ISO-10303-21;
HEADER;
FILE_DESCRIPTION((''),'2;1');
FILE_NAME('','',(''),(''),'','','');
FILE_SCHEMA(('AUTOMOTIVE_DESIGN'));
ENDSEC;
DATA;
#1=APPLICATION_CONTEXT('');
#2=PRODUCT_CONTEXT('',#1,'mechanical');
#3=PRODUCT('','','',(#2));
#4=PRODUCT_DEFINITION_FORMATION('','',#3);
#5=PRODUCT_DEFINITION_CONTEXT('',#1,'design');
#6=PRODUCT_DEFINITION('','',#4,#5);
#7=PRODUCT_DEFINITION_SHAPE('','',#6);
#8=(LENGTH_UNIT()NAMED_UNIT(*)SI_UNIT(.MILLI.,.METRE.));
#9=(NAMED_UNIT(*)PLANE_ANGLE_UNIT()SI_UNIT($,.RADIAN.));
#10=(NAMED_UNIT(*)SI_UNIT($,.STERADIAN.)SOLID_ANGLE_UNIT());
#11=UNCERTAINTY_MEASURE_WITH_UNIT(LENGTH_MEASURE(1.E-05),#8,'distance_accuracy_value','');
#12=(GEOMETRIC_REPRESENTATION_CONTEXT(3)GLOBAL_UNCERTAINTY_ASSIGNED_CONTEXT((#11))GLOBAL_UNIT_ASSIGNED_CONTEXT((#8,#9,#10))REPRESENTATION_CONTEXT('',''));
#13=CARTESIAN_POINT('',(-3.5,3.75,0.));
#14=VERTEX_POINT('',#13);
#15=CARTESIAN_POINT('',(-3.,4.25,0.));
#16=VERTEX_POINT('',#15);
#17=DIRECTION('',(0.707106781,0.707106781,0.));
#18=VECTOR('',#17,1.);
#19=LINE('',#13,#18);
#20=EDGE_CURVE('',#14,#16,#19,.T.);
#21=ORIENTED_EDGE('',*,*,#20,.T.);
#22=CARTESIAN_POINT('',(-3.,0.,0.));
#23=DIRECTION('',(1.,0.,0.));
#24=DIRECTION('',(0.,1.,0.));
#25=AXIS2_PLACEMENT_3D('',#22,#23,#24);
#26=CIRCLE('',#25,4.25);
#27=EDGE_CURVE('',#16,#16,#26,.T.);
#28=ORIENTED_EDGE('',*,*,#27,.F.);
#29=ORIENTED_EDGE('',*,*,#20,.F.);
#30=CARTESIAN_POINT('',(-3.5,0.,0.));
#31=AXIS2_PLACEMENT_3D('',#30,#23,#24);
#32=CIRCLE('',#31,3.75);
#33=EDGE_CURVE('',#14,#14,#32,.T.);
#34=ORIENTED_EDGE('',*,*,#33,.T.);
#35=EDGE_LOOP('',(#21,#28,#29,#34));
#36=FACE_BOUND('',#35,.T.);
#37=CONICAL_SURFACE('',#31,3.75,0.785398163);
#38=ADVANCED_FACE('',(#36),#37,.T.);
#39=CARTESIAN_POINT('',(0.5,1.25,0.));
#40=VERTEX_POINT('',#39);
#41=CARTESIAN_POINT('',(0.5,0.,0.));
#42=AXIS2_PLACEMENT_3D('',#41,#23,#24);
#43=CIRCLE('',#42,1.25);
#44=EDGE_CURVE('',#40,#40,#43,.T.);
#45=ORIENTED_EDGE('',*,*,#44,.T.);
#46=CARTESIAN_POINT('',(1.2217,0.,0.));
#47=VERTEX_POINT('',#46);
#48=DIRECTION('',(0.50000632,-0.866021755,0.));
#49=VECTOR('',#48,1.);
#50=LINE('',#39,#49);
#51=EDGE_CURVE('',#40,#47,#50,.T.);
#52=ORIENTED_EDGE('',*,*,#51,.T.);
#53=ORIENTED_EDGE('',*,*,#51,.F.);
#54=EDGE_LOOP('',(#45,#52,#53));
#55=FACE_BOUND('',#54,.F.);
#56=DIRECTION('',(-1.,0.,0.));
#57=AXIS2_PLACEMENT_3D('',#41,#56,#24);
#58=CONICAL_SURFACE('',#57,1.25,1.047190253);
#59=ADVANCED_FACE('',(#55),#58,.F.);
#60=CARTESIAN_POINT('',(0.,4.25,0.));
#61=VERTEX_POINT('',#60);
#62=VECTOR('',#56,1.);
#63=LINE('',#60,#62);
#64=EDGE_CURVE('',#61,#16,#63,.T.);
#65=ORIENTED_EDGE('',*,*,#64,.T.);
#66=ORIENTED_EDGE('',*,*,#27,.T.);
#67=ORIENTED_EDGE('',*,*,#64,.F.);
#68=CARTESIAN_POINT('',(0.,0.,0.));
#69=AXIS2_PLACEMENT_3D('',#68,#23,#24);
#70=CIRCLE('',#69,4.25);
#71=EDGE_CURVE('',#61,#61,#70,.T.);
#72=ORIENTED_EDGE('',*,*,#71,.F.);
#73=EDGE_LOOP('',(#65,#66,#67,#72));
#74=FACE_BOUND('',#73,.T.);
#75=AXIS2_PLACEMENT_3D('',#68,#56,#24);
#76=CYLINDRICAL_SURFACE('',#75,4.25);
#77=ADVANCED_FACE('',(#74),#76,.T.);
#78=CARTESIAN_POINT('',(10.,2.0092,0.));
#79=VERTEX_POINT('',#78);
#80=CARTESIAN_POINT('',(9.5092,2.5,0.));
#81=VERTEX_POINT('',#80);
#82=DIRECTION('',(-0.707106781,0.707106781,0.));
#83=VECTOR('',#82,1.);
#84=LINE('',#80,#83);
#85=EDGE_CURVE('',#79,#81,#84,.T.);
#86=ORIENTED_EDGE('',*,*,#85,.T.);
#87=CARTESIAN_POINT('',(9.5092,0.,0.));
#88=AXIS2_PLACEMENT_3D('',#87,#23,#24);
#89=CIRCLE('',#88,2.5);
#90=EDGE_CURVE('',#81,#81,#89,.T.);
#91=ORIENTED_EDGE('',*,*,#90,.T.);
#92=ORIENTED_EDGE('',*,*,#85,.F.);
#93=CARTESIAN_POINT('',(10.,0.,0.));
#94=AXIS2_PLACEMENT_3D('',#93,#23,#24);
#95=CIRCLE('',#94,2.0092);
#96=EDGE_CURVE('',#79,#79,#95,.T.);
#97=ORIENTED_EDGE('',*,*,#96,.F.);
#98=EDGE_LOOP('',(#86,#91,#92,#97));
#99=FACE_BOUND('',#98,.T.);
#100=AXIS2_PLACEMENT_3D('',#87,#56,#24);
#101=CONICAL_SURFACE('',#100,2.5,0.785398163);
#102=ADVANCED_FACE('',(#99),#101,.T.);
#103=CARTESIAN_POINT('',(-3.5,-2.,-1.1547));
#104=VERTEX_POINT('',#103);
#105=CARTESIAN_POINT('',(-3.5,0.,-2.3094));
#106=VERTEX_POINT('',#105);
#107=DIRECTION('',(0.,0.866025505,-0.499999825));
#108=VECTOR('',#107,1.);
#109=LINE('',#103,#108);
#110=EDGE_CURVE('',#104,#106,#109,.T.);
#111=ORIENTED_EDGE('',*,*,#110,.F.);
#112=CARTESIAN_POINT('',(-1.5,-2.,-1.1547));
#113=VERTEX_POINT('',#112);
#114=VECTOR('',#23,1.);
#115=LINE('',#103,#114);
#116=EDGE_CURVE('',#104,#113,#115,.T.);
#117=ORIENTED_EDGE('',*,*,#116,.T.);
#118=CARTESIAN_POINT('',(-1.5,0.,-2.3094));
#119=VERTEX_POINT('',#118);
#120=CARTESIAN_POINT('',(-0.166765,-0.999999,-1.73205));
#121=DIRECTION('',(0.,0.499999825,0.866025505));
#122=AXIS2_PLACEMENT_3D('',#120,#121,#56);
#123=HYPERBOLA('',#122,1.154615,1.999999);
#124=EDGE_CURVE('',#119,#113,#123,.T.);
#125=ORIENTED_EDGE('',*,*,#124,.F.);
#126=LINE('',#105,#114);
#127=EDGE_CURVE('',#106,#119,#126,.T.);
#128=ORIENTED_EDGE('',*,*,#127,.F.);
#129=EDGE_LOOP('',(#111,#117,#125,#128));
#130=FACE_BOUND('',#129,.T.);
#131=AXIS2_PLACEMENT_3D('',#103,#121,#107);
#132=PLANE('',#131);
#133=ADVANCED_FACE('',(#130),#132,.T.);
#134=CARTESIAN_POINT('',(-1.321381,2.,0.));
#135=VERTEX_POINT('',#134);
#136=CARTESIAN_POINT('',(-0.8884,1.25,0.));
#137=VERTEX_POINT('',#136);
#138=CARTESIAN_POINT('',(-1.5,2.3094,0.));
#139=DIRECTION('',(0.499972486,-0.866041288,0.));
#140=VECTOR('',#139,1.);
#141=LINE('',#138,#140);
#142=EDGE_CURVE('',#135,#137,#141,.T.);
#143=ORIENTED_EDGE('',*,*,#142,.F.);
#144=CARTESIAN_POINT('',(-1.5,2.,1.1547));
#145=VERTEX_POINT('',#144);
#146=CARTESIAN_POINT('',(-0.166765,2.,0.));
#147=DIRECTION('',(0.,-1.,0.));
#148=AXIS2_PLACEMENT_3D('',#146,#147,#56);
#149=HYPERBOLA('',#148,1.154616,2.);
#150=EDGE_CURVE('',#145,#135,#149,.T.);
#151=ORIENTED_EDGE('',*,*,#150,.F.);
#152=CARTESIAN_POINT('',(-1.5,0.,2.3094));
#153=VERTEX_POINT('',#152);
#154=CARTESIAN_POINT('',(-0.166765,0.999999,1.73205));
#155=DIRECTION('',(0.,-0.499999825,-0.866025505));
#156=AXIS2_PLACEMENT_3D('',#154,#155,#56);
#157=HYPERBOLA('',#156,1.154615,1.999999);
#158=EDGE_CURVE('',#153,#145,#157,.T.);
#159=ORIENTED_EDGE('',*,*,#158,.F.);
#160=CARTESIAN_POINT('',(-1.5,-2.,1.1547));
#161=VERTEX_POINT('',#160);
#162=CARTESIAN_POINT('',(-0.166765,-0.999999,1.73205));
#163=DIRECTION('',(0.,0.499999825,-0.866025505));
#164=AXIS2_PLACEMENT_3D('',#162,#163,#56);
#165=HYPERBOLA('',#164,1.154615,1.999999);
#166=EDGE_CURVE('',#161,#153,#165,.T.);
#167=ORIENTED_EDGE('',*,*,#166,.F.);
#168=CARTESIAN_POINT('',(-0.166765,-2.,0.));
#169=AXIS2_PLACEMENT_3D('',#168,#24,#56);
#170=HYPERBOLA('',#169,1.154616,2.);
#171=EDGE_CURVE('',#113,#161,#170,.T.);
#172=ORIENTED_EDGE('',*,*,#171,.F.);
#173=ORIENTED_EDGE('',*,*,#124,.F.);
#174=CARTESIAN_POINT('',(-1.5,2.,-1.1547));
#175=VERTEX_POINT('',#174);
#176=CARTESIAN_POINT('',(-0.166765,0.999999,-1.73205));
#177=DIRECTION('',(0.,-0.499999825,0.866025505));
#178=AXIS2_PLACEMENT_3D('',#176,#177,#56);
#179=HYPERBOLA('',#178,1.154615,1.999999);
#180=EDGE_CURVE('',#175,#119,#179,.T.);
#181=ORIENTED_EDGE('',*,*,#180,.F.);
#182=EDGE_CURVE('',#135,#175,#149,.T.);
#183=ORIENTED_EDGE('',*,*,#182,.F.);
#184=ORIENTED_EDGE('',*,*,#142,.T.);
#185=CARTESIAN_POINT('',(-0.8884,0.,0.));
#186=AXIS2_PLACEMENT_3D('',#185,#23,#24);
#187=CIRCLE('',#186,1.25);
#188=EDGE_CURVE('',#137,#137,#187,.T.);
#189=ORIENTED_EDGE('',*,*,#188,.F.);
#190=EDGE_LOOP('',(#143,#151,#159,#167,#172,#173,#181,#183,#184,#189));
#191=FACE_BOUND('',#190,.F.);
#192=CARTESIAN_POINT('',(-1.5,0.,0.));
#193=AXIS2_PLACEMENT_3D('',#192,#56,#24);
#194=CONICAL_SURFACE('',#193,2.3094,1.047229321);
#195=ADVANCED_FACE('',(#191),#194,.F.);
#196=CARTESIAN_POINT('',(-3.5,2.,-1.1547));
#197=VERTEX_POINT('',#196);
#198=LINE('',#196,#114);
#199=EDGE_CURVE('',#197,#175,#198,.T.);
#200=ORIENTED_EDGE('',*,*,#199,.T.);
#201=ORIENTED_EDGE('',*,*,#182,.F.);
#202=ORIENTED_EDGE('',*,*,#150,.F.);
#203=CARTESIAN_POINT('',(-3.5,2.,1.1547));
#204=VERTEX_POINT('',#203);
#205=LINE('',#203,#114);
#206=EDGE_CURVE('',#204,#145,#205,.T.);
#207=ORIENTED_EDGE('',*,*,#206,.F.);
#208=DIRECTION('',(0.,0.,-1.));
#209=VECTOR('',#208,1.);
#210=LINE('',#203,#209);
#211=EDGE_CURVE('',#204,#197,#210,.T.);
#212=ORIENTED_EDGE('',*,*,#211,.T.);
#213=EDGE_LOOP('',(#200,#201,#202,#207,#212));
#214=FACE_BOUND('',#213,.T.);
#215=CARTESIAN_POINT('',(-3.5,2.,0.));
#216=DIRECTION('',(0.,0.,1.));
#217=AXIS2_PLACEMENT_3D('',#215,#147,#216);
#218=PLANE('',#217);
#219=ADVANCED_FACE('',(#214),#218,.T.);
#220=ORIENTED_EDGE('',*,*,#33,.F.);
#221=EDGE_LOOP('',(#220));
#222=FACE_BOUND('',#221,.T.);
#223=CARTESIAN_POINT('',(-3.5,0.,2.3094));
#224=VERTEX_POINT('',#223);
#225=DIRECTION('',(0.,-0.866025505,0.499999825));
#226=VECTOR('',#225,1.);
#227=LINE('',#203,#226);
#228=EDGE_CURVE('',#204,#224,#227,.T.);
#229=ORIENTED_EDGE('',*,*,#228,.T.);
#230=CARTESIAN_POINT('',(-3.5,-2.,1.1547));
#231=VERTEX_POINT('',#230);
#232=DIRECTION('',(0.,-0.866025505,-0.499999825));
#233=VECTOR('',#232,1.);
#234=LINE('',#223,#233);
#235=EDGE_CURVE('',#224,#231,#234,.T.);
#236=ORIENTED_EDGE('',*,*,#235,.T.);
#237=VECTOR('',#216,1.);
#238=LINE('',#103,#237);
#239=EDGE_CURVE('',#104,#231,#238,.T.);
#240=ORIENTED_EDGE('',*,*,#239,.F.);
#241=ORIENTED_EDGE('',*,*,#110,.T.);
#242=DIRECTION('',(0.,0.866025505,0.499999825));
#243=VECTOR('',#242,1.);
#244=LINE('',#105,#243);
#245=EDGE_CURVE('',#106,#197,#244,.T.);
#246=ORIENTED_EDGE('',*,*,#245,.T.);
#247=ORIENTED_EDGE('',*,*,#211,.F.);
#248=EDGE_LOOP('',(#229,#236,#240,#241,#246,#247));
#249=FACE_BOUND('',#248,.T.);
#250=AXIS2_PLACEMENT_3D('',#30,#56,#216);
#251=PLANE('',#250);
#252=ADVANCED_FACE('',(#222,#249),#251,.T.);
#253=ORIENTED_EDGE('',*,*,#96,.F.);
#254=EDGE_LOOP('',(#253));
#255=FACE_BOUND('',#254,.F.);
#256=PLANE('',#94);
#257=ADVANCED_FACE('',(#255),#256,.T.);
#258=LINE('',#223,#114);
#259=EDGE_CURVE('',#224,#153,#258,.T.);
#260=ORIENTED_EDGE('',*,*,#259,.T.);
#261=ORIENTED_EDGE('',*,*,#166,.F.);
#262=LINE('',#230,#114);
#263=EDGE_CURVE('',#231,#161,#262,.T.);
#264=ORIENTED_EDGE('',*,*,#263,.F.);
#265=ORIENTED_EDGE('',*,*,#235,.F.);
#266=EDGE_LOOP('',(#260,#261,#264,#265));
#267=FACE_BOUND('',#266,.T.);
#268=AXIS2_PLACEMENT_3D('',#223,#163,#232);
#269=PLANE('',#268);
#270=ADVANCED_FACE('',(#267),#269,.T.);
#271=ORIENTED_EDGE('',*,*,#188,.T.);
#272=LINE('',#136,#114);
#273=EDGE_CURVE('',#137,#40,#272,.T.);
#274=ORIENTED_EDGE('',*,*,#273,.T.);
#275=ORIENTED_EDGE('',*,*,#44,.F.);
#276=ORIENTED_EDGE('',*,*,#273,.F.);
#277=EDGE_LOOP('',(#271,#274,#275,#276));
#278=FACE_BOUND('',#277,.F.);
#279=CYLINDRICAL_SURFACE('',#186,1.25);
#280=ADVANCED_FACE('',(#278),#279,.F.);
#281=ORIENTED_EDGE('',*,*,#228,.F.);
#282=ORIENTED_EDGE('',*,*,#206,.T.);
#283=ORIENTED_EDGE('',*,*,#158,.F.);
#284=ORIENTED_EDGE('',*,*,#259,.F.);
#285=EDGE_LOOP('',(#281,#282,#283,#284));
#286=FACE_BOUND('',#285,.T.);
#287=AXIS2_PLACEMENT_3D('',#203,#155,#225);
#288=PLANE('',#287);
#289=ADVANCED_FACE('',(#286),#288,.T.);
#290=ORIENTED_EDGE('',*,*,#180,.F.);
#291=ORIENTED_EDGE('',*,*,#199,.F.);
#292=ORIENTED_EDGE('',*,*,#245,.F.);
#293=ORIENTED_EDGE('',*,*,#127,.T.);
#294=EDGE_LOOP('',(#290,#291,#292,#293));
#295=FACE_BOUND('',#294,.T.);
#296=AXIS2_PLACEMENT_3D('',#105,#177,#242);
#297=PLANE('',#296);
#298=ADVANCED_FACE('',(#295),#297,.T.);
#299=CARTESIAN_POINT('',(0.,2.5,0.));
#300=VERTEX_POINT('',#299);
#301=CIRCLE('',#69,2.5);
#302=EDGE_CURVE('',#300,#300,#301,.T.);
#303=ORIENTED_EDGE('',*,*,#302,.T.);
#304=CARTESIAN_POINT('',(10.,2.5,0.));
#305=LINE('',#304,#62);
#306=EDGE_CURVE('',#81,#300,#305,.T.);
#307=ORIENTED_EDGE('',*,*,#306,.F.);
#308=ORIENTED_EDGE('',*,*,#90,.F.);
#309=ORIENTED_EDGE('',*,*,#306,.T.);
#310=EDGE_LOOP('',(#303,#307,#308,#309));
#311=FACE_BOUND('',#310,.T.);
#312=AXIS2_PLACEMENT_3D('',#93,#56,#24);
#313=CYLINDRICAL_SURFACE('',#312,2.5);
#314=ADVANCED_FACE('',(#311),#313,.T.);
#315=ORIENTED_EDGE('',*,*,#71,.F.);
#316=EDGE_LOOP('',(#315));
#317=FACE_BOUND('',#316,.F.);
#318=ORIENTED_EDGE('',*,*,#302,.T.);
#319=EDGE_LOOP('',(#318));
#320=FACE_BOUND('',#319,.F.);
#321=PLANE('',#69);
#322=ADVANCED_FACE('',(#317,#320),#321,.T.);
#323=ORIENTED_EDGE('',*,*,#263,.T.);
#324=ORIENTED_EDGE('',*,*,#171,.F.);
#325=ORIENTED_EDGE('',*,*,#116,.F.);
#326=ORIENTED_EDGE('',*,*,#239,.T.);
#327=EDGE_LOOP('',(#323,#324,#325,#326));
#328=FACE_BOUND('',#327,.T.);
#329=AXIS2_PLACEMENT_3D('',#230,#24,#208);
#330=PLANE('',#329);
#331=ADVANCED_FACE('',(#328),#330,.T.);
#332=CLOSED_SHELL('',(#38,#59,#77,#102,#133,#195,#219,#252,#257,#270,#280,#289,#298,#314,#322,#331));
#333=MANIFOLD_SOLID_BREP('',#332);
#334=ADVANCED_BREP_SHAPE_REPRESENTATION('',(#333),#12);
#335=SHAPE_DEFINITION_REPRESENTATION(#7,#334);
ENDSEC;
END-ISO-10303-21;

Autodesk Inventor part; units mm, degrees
ref_plane "YZ Plane" through (0, 0, 0) normal (1, 0, 0) x (0, 1, 0)
ref_plane "XZ Plane" through (0, 0, 0) normal (0, 1, 0) x (-1, 0, 0)
sketch "Skizze1" plane through (0, 0, 0) normal (0, 0, 1) x (1, 0, 0)
  line L0 (1.2217, 0) -> (10, 0)
  line L1 (10, 0) -> (10, 2.5)
  line L2 (10, 2.5) -> (0, 2.5)
  line L3 (0, 2.5) -> (0, 4.25)
  line L4 (0, 4.25) -> (-3.5, 4.25)
  line L5 (-3.5, 4.25) -> (-3.5, 2.3094)
  line L6 (-3.5, 2.3094) -> (-1.5, 2.3094)
  line L7 (-1.5, 2.3094) -> (-0.8884, 1.25)
  line L8 (-6.2, 0) -> (12.7, 0) projected
  line L9 (0, -0.85) -> (0, 5.1) projected
  line L10 (-0.8884, 1.25) -> (0.5, 1.25)
  line L11 (0.5, 1.25) -> (1.2217, 0)
  line L12 (-3.5, 2.3094) -> (-3.5, 0) construction
  line L13 (-3.5, 3.75) -> (-3, 4.25)
  dimension "d0" = 3.5
  dimension "d1" = 2
  dimension "d2" = 60
  dimension "d3" = 5
  dimension "d4" = 4.6188
  dimension "d5" = 8.5
  dimension "d15" = 4
  dimension "d16" = 2.5
  dimension "d17" = 10
  dimension "d32" = 45
  dimension "d33" = 0.5
revolve "Körper" add sketch "Skizze1" angle 360 about axis through (1.2217, 0, 0) along (1, 0, 0) contours L11 L10 L9 L2 L1 L0 | L10 L7 L6 L5 L13 L4 L3 L9 | L13 L5 L4
revolve "Fase2" cut sketch "Skizze1" angle 360 about axis through (-10, 0, 0) along (1, 0, 0) contours L13 L5 L4
sketch "Skizze2" plane through (-3.5, 0, 0) normal (-1, 0, 0) x (0, 0, 1)
  circle A0 centre (0, 0) radius 2.3094 projected
  line L0 (0, -5.95) -> (0, 5.95) projected
  line L1 (-5.95, 0) -> (5.95, 0) projected
  line L2 (2.3094, 0) -> (1.1547, -2)
  line L3 (1.1547, -2) -> (-1.1547, -2)
  line L4 (-1.1547, -2) -> (-2.3094, 0)
  line L5 (-2.3094, 0) -> (-1.1547, 2)
  line L6 (-1.1547, 2) -> (1.1547, 2)
  line L7 (1.1547, 2) -> (2.3094, 0)
extrude "Loch" add sketch "Skizze2" against normal up to next contours L7 A0 | A0 L2 | L6 L0 A0 | A0 L0 L3 | L0 L6 A0 | A0 L3 L0 | L4 A0 | A0 L5
thread "Gewinde" size "M5x0.8" class "6g" standard "ISO Metric profile" length 5.8
chamfer "Fase1" distance 0.4908 distance2 0.4908 1 edges at (10, -2.5, 0) measured on face at (10, -0.7741, -0.6858)
ref_plane "Work Plane1" through (5, 0, 0) normal (0, 0.5, 0.8660254) x (1, 0, 0)
equation "\"d0\" = KOH"
equation "\"d1\" = INTI"
equation "\"d3\" = GD"
equation "\"d4\" = 1.1547 * SW"
equation "\"d5\" = KOD"
equation "\"d15\" = INFT"
equation "\"d16\" = SDT"
equation "\"d17\" = NLG"
equation "\"d33\" = Cham"
equation "\"d7\" = GEL"
equation "\"d9\" = -0.5 * SPD + 0.5 * GD"
equation "\"d12\" = GUL"
equation "\"GD\" = NND"
equation "\"NLG\" = 10"
equation "\"GEL\" = 5.8"
equation "\"KOD\" = 8.5"
equation "\"KOH\" = 3.5"
equation "\"GUL\" = 0.61345 * PTC"
equation "\"SW\" = 4"
equation "\"INTI\" = 2"
equation "\"SPD\" = NND - 1.2269 * PTC"
equation "\"SDT\" = 2.5"
equation "\"INFT\" = 4"
equation "\"Cham\" = 0.5"
equation "\"TOA\" = 30deg"
equation "\"GD1\" = THREADDIA - 1.2269 * PTC"
equation "\"THREADDIA\" = 5"
equation "\"BDM\" = NND"
equation "\"FAWI\" = 45deg"
equation "\"RR\" = 0.1 * NND"
equation "\"PTC\" = 0.8"
equation "\"NND\" = 5"
equation "\"FAWI1\" = 45deg"
equation "\"GAL\" = 0.61345 * PTC"
equation "\"E0\" = 1.155 * SW"
properties part number "DIN 6912 - M5 x 10" material "Steel, Mild"
